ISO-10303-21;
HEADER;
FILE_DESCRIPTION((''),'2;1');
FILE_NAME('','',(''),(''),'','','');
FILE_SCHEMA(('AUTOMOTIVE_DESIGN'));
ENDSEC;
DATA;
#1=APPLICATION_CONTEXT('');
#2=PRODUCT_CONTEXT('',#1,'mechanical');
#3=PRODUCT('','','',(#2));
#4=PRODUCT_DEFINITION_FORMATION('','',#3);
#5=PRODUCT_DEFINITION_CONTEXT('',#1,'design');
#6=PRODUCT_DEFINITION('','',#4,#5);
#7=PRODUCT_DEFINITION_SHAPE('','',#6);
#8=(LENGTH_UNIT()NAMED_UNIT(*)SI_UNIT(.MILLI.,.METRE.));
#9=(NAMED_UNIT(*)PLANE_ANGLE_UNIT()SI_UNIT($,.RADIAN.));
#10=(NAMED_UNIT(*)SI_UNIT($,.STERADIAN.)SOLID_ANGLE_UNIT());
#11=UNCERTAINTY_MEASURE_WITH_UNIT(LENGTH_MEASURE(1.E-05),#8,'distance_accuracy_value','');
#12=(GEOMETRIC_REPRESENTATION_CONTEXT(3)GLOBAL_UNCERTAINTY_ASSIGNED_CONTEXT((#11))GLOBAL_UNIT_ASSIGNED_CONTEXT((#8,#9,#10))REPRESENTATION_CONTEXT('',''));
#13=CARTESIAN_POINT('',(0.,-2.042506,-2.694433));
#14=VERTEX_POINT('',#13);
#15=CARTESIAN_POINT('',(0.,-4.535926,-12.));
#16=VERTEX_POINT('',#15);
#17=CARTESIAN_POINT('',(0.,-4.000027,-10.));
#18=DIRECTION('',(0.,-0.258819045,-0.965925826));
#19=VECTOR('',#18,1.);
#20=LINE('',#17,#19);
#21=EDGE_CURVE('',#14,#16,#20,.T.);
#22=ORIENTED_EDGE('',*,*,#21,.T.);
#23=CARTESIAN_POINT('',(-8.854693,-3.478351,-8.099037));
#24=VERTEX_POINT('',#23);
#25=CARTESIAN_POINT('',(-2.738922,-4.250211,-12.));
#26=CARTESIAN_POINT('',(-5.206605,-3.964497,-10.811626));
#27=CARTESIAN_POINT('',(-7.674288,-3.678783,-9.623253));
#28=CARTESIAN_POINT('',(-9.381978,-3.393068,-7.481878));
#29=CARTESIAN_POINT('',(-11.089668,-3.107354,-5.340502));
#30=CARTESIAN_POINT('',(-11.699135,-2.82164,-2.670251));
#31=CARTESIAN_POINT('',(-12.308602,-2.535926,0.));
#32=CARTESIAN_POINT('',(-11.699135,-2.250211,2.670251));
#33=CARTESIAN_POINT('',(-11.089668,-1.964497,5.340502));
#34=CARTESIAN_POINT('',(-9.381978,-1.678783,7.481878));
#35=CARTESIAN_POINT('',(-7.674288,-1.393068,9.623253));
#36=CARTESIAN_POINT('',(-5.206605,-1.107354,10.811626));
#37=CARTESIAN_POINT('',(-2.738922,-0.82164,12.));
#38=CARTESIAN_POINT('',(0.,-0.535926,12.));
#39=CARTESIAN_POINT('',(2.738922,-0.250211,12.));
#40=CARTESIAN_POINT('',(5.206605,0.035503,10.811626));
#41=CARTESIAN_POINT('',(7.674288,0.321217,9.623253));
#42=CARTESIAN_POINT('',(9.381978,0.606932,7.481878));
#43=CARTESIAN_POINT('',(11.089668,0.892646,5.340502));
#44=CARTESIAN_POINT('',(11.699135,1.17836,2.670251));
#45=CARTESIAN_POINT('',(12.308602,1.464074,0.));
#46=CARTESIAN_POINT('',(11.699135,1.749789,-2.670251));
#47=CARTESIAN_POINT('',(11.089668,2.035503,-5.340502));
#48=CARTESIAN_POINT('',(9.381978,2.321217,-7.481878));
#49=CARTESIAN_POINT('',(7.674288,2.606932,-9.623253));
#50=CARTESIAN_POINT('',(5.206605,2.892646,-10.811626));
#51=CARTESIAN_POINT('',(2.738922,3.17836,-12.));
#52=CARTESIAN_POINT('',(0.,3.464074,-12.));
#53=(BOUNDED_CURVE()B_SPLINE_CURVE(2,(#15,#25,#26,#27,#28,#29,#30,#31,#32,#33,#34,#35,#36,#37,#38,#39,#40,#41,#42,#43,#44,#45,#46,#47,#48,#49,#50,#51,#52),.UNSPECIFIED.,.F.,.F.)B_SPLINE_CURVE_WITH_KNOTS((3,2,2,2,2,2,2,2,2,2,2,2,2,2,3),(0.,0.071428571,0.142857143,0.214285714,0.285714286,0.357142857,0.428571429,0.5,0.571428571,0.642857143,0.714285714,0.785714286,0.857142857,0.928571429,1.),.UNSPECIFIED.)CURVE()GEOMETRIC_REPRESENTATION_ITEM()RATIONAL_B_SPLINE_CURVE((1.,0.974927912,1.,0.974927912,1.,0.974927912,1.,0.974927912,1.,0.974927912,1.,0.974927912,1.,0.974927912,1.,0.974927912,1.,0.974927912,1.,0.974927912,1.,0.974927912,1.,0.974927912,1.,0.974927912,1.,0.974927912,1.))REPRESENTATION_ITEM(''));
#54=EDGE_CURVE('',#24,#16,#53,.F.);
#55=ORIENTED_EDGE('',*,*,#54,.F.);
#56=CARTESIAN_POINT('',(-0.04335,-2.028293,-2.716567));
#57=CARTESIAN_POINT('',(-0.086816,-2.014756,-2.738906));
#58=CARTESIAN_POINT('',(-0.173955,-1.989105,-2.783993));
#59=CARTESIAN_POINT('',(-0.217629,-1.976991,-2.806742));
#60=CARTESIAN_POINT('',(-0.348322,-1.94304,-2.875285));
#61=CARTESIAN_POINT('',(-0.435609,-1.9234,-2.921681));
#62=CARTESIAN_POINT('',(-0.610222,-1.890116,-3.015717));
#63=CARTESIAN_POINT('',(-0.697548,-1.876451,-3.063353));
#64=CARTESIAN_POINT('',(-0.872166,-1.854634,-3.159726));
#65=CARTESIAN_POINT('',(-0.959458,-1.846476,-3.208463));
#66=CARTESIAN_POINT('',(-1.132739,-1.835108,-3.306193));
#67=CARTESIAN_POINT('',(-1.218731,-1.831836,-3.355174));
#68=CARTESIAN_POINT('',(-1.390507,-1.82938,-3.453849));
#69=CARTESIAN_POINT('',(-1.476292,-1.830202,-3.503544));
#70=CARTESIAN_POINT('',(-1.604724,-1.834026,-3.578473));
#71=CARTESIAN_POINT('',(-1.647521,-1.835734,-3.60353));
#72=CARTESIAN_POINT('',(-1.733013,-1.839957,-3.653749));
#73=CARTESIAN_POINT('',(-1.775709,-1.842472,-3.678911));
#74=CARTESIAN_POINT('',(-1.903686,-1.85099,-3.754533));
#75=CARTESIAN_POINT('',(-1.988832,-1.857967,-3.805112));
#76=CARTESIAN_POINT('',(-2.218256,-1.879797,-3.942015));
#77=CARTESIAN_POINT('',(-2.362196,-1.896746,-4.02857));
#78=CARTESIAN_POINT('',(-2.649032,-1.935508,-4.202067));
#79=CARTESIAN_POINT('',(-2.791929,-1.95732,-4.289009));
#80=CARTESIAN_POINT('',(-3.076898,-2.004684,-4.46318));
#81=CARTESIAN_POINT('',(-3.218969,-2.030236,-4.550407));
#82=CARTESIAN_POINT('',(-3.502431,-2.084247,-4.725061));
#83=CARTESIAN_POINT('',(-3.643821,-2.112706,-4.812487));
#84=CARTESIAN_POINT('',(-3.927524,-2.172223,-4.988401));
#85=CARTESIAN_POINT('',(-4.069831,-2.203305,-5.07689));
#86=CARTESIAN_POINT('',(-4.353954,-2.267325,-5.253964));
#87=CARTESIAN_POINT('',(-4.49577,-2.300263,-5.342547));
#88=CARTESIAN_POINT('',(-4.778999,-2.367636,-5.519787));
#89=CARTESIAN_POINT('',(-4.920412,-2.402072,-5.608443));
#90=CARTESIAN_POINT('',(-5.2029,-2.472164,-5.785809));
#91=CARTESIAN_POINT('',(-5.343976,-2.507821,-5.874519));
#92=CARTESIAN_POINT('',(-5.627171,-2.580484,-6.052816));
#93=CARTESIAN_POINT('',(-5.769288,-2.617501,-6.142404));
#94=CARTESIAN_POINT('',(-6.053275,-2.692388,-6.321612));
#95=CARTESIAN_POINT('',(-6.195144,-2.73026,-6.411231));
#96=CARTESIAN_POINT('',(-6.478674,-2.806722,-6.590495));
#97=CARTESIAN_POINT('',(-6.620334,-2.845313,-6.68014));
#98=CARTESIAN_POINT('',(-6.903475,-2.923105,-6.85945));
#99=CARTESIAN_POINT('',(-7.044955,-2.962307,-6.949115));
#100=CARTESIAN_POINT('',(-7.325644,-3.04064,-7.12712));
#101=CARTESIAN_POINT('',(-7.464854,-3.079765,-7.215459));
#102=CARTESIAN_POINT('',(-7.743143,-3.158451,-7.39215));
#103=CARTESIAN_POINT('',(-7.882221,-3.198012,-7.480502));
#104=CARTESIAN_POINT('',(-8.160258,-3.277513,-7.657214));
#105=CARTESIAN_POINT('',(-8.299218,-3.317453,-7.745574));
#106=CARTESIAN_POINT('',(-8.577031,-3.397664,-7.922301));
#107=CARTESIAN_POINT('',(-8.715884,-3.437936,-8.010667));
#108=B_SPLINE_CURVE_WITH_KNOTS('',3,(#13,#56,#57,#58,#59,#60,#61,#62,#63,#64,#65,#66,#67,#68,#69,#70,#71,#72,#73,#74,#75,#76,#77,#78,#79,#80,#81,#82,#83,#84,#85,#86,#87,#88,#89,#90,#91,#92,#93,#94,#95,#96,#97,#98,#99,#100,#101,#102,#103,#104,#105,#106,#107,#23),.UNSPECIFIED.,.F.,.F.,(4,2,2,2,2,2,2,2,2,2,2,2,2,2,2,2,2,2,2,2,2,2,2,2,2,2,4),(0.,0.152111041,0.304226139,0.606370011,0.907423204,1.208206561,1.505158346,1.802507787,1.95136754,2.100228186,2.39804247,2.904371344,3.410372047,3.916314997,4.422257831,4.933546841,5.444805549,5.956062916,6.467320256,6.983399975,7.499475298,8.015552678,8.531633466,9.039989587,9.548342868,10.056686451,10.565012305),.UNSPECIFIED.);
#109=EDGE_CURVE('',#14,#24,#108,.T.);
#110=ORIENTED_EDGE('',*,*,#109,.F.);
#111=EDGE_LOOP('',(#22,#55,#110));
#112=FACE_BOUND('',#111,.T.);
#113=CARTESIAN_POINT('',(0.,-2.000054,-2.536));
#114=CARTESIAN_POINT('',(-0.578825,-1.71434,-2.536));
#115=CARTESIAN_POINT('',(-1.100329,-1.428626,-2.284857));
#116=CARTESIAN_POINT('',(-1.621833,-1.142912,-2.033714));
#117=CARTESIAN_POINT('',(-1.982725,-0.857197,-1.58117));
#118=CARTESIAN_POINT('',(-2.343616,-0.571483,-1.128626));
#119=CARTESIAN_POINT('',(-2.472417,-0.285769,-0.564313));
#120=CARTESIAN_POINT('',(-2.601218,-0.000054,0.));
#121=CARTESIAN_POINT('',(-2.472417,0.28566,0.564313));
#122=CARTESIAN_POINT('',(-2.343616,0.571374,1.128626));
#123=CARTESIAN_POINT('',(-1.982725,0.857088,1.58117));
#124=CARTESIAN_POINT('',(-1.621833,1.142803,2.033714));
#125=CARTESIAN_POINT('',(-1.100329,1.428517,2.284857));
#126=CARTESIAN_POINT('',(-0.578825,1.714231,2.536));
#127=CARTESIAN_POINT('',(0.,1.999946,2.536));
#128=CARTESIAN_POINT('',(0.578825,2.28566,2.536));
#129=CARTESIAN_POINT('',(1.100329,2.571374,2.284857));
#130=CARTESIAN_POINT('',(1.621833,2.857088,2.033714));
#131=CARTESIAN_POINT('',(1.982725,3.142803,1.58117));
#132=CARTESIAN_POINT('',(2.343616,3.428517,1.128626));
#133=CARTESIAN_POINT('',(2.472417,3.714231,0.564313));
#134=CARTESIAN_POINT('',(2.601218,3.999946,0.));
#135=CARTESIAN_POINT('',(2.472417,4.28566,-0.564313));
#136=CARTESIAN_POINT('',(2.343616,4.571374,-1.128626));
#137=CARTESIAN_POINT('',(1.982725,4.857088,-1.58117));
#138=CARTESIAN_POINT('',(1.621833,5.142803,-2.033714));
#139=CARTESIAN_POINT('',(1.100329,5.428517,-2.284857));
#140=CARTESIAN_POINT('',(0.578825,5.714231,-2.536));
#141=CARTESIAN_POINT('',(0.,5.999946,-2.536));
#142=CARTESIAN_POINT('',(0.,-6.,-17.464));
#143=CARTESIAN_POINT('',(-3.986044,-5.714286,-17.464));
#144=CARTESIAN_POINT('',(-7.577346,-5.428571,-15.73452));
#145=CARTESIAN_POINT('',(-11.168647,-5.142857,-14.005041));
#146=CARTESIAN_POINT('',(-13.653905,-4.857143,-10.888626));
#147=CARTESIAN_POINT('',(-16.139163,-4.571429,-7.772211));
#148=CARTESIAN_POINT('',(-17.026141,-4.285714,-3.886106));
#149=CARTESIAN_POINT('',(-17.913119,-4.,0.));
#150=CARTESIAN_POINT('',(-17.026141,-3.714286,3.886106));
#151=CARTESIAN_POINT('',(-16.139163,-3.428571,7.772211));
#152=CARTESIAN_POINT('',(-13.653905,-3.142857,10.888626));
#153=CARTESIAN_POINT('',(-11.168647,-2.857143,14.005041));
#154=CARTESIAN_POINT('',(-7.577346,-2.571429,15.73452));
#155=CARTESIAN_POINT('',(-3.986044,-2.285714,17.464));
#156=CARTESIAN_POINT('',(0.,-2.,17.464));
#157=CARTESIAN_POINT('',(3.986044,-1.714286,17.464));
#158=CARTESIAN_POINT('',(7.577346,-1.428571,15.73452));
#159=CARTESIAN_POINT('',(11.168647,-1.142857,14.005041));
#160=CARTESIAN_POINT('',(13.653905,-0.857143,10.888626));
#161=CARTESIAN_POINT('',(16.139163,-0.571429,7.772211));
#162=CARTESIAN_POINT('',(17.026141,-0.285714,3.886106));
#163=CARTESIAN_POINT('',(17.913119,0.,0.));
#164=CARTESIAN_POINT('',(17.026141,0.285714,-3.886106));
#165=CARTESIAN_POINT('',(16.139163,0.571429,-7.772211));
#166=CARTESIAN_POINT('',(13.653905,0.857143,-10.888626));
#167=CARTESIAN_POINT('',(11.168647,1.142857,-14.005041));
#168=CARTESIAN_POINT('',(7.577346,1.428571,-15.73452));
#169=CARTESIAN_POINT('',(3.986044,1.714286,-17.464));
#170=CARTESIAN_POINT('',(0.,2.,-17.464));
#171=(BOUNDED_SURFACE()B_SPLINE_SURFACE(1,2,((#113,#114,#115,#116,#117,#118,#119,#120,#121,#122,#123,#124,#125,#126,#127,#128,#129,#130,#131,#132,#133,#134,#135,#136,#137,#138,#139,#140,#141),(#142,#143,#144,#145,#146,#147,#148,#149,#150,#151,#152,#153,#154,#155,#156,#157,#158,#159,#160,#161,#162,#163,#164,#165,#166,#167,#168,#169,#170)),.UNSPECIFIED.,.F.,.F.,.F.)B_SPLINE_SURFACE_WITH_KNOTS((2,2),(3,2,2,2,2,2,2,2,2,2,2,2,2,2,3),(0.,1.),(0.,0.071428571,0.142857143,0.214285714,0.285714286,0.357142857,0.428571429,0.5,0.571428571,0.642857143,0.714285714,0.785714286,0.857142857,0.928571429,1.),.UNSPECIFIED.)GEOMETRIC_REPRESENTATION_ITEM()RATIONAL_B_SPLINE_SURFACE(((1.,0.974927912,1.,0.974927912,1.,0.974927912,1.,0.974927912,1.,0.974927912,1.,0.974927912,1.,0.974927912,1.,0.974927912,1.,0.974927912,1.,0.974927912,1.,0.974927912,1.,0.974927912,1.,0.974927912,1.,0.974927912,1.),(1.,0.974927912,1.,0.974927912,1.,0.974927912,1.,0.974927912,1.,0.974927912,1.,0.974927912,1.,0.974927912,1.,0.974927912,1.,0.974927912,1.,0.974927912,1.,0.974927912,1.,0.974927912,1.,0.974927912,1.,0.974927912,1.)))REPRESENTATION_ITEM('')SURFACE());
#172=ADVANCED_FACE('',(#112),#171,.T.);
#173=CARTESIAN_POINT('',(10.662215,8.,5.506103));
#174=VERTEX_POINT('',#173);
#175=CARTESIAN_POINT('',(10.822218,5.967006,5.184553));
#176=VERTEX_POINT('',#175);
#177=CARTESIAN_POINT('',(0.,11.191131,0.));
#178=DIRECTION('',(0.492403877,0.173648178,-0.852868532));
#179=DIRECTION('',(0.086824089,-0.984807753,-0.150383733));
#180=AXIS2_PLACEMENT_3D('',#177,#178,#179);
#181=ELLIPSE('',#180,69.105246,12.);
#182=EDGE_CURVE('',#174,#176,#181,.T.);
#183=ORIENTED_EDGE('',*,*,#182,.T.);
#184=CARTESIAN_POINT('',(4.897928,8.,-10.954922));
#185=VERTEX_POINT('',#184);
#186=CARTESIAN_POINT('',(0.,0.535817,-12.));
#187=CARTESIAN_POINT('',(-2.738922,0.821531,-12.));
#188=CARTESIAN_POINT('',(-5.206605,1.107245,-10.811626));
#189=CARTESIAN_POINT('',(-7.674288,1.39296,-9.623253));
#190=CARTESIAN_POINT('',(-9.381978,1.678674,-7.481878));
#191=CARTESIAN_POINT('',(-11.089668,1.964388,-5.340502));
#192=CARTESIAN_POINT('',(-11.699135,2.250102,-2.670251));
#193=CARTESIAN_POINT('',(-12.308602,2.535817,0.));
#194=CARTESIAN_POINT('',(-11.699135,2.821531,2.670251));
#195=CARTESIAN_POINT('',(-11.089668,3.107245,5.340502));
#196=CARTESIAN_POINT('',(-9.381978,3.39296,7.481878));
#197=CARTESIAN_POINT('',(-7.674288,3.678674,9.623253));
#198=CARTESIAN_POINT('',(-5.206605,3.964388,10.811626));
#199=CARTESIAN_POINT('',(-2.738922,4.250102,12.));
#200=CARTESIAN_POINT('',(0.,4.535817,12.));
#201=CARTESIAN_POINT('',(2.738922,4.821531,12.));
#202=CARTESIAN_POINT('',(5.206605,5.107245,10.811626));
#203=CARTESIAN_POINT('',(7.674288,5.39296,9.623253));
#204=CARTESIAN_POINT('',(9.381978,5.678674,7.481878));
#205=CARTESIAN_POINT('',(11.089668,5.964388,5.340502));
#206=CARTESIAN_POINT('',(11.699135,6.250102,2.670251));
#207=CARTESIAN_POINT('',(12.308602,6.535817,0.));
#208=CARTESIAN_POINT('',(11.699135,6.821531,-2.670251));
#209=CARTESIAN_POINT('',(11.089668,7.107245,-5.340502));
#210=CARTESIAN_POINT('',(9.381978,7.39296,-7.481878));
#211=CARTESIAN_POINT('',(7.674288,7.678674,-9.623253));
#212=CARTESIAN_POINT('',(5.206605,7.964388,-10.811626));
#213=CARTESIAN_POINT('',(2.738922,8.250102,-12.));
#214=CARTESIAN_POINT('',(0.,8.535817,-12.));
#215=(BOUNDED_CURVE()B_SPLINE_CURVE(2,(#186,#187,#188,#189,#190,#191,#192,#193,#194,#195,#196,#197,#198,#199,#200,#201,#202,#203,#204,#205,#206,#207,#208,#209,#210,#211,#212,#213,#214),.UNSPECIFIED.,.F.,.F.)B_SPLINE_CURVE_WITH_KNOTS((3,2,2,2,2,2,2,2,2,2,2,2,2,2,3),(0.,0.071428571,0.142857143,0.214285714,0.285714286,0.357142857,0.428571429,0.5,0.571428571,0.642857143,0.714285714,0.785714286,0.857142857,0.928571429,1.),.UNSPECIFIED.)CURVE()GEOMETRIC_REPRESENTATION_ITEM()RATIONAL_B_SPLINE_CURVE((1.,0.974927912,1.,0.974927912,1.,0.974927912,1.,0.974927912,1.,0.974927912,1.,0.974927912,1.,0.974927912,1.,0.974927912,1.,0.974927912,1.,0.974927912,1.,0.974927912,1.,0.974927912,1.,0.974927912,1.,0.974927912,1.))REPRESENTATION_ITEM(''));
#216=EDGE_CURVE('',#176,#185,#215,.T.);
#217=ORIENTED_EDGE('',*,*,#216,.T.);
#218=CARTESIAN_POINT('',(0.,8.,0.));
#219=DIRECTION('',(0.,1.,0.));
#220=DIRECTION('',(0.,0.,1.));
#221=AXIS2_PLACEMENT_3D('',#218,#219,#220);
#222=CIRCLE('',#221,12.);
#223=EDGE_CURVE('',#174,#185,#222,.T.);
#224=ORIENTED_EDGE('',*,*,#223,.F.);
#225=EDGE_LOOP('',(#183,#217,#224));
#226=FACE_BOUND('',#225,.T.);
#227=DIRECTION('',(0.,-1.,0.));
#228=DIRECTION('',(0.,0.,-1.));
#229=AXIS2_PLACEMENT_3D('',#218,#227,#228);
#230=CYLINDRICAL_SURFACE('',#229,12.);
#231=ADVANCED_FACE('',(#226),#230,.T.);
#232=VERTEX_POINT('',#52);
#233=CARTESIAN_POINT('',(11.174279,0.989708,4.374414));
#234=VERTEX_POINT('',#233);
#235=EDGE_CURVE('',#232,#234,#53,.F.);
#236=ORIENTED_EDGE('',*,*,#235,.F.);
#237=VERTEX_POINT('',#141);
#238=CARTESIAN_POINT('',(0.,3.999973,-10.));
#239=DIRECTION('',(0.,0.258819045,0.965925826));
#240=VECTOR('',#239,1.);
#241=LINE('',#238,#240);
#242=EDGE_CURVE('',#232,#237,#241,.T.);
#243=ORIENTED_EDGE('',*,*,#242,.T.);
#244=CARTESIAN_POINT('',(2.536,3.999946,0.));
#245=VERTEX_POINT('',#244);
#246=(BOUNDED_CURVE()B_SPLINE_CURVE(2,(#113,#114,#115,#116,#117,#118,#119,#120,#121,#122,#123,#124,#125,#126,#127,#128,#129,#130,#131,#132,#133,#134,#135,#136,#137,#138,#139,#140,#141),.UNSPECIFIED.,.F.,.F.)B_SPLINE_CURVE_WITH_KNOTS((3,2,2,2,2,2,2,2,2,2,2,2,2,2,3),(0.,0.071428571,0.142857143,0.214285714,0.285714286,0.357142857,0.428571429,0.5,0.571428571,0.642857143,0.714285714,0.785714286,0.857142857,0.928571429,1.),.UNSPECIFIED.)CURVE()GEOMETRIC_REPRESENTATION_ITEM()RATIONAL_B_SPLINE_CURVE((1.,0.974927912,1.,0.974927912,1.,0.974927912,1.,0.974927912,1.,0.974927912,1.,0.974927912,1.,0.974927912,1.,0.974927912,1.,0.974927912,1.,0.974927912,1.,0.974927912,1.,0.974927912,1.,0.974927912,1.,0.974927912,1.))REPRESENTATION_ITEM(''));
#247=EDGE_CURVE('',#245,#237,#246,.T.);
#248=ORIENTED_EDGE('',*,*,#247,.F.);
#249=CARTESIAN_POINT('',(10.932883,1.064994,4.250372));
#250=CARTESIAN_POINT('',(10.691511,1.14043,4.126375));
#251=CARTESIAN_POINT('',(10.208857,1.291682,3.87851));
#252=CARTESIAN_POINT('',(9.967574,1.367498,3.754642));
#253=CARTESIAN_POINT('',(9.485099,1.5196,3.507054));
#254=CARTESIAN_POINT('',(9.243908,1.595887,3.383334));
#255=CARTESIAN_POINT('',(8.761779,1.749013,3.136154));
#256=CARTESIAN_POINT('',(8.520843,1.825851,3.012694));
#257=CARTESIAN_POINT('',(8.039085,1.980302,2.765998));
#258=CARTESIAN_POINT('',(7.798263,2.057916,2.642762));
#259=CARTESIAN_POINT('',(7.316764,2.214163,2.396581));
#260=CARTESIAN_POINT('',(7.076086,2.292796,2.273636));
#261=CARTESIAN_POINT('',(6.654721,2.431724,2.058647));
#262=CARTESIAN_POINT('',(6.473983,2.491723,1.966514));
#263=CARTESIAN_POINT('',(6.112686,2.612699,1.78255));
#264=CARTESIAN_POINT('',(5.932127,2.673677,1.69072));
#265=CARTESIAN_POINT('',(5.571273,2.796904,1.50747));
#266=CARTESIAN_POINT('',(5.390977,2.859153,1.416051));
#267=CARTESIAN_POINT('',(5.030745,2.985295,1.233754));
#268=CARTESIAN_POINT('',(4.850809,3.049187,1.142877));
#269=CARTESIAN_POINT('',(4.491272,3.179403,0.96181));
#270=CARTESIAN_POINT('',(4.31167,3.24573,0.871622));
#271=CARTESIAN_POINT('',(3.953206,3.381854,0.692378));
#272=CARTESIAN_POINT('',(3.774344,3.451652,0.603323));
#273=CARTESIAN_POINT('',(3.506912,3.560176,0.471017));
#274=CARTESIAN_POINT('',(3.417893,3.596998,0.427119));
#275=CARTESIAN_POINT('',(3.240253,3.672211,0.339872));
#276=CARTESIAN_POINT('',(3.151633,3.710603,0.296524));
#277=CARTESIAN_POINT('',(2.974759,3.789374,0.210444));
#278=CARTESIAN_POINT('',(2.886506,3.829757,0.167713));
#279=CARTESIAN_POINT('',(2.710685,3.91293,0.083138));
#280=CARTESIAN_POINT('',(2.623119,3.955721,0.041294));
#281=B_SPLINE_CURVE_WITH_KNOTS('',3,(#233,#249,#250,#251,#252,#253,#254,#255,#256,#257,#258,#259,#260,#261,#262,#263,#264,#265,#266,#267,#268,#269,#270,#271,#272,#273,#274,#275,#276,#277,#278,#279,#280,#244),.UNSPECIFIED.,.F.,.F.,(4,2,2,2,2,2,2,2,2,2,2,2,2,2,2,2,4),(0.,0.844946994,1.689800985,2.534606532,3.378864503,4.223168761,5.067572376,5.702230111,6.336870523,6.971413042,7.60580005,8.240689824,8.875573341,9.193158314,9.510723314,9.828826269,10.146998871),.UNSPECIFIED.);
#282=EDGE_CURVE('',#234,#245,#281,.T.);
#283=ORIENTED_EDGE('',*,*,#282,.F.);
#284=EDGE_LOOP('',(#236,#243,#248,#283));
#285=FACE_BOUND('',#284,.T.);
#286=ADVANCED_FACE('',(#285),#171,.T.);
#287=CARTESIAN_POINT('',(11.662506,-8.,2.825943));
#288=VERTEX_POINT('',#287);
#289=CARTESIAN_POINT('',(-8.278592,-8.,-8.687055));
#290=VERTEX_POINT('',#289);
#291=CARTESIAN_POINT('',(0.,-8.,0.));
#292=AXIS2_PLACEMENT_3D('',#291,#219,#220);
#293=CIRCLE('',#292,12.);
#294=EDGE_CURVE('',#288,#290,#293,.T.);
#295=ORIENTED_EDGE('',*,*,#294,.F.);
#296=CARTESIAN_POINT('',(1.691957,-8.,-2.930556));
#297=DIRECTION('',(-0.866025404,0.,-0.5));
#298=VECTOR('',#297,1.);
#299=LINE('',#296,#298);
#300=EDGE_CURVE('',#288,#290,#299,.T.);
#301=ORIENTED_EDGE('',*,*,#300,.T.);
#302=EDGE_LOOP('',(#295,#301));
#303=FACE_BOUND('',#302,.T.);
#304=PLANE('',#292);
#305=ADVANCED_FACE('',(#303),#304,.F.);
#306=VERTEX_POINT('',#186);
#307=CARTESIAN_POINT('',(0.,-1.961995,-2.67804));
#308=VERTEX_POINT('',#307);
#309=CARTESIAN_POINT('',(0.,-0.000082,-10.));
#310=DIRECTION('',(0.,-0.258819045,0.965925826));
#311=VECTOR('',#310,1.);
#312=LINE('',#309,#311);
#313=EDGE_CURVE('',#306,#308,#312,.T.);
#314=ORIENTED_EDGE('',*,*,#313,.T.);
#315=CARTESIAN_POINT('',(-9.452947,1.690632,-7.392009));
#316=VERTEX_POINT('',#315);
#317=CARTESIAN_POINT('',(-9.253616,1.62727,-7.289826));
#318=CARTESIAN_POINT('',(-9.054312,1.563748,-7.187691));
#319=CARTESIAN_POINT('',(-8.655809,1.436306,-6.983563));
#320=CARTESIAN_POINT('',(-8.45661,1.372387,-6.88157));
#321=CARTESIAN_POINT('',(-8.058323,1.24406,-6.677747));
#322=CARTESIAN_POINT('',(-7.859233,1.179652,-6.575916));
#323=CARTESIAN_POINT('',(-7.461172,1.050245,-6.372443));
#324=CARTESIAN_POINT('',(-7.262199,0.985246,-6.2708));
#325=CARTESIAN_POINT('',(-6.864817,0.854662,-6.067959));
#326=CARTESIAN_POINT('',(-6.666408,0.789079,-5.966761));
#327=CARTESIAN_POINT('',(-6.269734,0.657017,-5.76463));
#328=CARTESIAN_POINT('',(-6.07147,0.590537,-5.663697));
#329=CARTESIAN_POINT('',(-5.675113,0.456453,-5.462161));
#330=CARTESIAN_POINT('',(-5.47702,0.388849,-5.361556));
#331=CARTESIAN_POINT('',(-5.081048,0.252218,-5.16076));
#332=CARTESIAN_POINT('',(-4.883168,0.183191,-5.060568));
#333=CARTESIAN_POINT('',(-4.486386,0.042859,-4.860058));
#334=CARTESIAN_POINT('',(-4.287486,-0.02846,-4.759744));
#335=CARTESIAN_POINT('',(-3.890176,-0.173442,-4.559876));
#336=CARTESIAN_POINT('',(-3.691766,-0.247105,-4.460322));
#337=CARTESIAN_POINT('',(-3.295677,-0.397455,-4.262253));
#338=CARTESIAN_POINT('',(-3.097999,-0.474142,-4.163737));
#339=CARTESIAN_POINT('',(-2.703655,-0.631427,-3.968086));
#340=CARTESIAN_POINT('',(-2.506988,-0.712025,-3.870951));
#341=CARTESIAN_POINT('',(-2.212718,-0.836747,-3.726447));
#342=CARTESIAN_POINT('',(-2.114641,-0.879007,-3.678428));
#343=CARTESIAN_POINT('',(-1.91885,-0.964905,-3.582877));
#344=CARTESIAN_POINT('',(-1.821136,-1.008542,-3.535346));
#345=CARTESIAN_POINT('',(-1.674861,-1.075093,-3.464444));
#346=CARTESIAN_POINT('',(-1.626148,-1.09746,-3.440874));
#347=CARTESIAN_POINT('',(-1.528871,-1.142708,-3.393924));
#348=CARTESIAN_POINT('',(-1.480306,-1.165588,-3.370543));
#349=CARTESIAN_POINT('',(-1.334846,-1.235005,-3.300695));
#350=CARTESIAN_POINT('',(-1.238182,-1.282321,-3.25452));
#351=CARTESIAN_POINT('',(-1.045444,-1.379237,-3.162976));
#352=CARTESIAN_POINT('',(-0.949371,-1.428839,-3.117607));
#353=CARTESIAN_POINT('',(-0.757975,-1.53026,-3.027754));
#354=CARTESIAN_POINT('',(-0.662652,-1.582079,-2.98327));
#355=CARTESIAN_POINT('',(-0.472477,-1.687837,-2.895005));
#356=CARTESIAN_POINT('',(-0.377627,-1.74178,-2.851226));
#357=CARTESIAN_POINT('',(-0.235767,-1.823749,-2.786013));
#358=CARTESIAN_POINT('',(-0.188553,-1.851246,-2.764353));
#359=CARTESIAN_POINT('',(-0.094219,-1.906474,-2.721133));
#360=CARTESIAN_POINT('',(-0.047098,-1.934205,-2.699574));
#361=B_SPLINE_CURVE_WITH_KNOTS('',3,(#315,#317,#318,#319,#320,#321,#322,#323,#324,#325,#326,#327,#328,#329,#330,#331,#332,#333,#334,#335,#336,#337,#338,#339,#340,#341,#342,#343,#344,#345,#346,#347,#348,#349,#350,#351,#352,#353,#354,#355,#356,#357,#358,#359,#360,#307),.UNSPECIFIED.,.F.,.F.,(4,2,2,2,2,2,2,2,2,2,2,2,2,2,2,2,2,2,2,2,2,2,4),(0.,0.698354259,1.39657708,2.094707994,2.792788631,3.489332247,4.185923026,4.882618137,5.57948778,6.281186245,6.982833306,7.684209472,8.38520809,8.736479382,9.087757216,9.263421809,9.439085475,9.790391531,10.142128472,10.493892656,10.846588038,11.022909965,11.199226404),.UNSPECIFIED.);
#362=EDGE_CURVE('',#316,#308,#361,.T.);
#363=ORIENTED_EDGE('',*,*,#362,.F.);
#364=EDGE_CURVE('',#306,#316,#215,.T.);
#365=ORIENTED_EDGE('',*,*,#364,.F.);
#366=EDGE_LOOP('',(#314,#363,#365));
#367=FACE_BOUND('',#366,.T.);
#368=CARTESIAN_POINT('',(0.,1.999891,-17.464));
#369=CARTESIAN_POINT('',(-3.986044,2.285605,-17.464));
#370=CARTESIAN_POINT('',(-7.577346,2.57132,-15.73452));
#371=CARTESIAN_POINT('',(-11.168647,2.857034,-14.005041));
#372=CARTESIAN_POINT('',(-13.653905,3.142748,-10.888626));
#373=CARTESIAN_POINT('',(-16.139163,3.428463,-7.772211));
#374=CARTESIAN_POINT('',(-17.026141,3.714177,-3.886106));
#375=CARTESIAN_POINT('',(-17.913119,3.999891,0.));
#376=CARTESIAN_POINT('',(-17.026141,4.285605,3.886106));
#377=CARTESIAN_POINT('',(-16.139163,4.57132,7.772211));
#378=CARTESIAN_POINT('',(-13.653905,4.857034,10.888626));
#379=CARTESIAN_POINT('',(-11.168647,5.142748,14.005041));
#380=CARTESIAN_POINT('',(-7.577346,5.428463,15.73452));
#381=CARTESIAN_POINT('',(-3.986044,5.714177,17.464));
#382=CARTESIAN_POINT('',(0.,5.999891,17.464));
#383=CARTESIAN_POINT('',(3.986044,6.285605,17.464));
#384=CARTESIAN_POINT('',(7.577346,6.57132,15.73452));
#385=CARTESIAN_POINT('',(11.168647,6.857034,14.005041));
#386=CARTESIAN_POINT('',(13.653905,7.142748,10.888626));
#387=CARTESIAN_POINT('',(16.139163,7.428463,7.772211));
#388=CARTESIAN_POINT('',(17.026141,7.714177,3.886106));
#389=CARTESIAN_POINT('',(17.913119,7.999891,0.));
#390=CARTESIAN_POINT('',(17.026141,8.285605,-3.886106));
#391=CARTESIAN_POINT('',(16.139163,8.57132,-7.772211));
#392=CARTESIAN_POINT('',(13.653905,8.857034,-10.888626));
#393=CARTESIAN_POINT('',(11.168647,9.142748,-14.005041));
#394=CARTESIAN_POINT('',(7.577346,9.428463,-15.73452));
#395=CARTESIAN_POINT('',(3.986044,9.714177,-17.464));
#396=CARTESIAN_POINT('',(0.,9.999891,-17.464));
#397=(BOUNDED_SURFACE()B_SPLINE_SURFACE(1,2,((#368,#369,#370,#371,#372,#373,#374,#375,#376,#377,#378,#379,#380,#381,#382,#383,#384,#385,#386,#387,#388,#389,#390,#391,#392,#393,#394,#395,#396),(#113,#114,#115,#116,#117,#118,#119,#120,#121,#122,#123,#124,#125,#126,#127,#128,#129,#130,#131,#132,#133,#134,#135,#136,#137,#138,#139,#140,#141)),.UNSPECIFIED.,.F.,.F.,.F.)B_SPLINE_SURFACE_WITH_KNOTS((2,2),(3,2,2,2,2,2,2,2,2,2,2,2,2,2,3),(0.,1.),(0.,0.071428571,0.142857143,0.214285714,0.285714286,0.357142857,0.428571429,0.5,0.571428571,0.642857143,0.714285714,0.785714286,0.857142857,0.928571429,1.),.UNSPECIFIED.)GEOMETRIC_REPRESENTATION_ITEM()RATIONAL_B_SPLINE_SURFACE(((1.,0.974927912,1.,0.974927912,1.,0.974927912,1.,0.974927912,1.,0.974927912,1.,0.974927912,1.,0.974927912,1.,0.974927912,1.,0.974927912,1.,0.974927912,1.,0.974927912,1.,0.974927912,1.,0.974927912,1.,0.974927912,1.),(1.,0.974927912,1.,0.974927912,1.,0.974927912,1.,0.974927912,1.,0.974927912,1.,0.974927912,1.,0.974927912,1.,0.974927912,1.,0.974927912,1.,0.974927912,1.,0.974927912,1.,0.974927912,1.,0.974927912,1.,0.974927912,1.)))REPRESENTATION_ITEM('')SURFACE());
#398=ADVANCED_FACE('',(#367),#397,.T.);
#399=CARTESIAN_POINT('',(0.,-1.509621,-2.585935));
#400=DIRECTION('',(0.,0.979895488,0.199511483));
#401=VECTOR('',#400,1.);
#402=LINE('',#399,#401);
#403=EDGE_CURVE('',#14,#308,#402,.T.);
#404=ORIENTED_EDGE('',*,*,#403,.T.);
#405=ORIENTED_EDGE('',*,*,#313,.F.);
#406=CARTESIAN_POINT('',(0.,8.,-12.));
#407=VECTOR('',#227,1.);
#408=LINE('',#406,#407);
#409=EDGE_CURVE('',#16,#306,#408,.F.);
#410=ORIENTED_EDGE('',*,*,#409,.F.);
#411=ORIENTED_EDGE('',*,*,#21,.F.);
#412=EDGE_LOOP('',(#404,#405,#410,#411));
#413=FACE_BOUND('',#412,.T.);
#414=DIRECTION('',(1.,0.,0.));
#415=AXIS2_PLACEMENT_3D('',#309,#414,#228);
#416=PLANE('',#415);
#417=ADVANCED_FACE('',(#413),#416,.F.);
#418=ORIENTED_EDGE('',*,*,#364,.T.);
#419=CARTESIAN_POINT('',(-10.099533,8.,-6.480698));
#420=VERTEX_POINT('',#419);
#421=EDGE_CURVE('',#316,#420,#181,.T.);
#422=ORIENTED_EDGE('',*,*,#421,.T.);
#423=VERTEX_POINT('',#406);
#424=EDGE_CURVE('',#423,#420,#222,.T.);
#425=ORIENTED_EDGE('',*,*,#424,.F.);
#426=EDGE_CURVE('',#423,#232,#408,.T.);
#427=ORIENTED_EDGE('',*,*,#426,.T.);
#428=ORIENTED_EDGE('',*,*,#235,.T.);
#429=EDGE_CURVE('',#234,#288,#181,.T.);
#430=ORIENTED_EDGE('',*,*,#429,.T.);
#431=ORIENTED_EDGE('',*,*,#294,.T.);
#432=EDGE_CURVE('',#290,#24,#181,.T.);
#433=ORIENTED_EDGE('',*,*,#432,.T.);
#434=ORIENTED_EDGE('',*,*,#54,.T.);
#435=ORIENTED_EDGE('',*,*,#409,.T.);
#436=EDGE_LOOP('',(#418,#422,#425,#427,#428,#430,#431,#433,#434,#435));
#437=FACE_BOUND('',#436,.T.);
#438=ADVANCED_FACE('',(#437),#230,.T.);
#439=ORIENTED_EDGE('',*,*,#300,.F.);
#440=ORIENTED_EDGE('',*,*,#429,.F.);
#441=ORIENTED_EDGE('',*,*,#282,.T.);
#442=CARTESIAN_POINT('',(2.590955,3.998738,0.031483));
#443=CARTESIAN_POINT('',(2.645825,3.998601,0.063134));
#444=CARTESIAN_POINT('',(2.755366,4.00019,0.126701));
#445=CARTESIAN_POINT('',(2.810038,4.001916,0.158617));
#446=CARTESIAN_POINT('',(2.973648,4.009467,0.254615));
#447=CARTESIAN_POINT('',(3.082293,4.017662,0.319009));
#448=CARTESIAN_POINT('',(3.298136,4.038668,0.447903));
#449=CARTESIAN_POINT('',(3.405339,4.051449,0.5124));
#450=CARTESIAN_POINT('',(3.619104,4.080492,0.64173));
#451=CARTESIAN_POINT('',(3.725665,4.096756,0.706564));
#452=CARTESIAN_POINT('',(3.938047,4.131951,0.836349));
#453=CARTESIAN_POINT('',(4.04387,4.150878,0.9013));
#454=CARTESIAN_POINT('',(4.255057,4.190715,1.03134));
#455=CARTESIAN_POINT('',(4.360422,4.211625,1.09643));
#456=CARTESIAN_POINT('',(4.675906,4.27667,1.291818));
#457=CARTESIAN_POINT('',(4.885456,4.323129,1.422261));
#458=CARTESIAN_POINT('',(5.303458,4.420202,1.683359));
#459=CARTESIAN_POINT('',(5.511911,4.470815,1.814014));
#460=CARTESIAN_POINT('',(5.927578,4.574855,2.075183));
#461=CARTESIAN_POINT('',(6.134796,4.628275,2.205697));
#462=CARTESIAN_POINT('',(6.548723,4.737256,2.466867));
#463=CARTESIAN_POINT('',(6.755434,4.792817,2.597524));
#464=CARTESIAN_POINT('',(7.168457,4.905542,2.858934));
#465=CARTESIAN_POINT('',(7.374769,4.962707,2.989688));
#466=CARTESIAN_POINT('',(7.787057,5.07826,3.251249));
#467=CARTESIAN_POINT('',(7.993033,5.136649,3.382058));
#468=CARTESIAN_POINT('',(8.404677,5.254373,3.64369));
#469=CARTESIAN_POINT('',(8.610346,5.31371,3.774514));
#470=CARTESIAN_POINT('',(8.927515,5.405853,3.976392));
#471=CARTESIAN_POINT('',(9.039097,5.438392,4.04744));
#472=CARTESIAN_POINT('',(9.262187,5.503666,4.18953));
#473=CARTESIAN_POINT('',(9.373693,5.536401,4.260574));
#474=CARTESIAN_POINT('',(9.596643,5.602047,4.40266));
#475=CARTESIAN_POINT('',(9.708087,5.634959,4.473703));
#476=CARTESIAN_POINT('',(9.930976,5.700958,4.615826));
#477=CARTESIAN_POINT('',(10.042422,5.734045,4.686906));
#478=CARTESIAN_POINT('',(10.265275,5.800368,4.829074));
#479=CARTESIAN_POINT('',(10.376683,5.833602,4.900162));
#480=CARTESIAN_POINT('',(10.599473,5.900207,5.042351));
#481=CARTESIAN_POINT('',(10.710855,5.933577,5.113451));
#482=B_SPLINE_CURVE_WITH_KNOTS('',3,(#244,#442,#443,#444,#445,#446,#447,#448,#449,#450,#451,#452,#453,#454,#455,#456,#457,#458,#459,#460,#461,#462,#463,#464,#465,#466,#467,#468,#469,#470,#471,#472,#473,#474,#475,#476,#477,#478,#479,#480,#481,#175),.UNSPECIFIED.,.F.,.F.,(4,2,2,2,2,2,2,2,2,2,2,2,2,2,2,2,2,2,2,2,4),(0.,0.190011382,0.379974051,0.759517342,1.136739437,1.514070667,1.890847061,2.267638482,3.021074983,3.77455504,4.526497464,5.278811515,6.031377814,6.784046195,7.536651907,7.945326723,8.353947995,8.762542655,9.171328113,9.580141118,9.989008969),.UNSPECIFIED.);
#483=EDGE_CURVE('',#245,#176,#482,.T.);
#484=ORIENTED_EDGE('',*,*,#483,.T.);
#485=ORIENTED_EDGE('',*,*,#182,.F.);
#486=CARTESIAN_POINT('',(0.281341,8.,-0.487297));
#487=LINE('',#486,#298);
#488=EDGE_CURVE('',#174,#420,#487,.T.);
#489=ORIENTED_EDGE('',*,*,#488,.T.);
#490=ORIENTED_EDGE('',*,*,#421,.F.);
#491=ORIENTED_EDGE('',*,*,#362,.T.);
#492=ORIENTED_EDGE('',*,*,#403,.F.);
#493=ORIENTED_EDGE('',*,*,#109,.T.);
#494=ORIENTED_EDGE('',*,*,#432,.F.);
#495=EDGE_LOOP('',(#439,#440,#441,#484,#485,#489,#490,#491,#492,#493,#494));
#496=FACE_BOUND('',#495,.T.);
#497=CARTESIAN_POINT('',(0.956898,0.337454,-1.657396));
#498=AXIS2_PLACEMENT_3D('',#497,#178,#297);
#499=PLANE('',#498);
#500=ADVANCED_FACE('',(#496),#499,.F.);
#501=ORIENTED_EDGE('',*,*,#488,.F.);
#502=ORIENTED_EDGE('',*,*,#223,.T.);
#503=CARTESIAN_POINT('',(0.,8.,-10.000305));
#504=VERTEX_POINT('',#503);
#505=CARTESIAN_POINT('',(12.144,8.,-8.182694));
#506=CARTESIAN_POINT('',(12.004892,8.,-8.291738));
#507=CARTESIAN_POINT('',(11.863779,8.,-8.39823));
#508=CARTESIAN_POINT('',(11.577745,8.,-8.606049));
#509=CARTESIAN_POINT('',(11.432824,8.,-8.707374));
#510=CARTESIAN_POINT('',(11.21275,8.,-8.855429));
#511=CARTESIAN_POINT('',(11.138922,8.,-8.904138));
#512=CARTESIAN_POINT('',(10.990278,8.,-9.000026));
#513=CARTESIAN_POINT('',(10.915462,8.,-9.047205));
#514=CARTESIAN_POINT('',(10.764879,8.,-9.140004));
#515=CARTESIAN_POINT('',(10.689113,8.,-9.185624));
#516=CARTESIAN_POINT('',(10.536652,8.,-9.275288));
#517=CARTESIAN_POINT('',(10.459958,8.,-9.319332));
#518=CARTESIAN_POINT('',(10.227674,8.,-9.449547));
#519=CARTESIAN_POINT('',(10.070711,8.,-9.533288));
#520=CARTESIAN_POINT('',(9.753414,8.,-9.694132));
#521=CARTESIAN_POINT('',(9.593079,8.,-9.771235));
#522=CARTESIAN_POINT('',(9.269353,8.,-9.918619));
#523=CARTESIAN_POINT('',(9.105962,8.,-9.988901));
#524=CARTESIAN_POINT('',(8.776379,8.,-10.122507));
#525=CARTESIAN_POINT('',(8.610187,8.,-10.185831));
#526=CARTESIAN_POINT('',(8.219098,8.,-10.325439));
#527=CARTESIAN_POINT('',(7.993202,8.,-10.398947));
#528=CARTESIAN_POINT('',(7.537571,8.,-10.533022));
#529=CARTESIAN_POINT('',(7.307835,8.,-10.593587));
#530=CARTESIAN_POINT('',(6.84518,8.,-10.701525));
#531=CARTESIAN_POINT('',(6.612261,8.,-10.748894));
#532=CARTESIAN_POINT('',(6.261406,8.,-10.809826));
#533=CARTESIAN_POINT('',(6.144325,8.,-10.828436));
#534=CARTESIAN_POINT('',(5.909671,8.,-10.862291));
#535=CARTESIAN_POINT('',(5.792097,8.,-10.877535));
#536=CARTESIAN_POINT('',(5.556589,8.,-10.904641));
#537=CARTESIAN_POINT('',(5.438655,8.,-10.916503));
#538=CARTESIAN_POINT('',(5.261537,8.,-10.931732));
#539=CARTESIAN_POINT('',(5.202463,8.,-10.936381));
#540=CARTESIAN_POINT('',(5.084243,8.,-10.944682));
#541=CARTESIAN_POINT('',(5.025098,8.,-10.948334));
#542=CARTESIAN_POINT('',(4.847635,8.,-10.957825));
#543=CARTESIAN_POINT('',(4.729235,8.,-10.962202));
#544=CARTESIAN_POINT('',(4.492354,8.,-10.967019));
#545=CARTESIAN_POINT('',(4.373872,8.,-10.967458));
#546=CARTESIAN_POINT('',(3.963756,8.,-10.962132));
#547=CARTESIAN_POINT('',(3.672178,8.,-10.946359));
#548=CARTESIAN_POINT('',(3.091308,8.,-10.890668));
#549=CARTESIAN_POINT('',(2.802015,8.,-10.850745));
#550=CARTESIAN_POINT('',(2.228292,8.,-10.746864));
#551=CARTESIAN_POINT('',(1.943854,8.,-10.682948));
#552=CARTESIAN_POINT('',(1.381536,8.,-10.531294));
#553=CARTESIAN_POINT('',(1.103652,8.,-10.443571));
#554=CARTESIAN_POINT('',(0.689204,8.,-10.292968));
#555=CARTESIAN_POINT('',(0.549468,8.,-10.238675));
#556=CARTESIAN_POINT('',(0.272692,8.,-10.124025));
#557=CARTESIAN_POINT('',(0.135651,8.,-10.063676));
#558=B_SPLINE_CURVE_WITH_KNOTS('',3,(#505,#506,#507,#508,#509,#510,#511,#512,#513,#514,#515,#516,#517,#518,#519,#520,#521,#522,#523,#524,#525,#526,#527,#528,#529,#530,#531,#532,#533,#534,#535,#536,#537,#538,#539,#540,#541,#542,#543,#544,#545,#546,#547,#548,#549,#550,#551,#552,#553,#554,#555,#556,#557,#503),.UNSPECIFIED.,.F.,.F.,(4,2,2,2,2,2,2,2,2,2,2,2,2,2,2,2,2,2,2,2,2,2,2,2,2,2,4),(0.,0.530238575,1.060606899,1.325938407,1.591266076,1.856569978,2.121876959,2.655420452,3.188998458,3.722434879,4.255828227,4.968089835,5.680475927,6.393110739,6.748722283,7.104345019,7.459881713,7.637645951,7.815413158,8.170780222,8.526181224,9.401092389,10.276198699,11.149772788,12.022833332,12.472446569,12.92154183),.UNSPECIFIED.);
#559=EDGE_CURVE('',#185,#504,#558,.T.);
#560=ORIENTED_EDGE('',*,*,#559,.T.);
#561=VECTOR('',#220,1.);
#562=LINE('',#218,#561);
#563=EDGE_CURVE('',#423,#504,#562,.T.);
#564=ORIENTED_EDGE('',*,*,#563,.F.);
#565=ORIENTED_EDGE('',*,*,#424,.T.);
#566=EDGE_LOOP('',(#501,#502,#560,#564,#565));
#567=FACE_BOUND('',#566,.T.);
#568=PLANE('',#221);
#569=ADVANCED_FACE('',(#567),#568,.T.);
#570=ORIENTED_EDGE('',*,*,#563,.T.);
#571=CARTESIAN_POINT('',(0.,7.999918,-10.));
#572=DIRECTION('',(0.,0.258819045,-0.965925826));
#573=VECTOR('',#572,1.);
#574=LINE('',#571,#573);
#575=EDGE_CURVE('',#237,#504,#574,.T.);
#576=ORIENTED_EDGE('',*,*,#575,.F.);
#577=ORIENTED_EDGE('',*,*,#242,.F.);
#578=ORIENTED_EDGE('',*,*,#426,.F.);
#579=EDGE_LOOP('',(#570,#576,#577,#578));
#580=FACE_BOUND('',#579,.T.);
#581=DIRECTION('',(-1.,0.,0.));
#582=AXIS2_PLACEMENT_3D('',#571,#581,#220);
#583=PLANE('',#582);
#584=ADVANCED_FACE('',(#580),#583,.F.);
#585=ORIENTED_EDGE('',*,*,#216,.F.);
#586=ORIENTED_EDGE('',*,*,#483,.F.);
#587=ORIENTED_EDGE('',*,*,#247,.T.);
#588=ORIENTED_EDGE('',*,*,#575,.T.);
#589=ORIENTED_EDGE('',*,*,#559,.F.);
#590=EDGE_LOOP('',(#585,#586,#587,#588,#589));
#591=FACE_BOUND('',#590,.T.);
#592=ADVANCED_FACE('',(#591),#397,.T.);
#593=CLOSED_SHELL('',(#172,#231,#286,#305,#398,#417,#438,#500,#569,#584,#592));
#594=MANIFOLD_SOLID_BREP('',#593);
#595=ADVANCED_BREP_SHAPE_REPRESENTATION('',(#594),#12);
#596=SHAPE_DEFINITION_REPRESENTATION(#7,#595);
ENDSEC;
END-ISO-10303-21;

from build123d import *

# Parameters (mm, degrees)
SKETCH_2_R              = 12
EXTRUDE_1_DEPTH         = 8
SWEEP_3_PITCH           = 8
SURFACE_START           = -14
SURFACE_CUT_2_OUTLINE_W = 28
SURFACE_CUT_2_OUTLINE_H = 22
SURFACE_CUT_2_DEPTH     = 15.943319485


with BuildPart() as part:
    # Эскиз2 → Бобышка-Вытянуть1 (new, symmetric)
    with BuildSketch(Plane(origin=(0, 0, 0), x_dir=(1, 0, 0), z_dir=(0, 1, 0))):
        with Locations(Location((0, 0, 0), (0, 0, 270))):
            Circle(SKETCH_2_R)
    extrude(amount=EXTRUDE_1_DEPTH, both=True)

    # Вырез-По траектории3: arcs per turn and ends read off the stored shape
    # Вырез-По траектории3: the profile of Эскиз5<2> screwed along a right-hand helix through 1 turns, 14 arcs to a turn; built about Z, then put on its axis
    sweep_3_z = Axis((0, 0, 0), (0, 0, 1))
    sweep_3_corners = [(17.464, 0, 2), (2.536, 0, 5.999945545), (17.464, 0, 9.999891089)]
    with BuildLine(mode=Mode.PRIVATE) as sweep_3_profile:
        Line(sweep_3_corners[0], sweep_3_corners[1])
        Line(sweep_3_corners[1], sweep_3_corners[2])
        Line(sweep_3_corners[2], sweep_3_corners[0])
    sweep_3_cap = Face(sweep_3_profile.wire())
    sweep_3_turn_angles = [0, 12.857142857, 25.714285714, 38.571428571, 51.428571429, 64.285714286, 77.142857143, 90, 102.857142857, 115.714285714, 128.571428571, 141.428571429, 154.285714286, 167.142857143, 180, 192.857142857, 205.714285714, 218.571428571, 231.428571429, 244.285714286, 257.142857143, 270, 282.857142857, 295.714285714, 308.571428571, 321.428571429, 334.285714286, 347.142857143, 360]
    sweep_3_turn_weights = [1, 0.9749279121818236, 1, 0.9749279121818236, 1, 0.9749279121818236, 1, 0.9749279121818236, 1, 0.9749279121818236, 1, 0.9749279121818236, 1, 0.9749279121818236, 1, 0.9749279121818236, 1, 0.9749279121818236, 1, 0.9749279121818236, 1, 0.9749279121818236, 1, 0.9749279121818237, 1, 0.9749279121818236, 1, 0.9749279121818236, 1]
    sweep_3_turn_rails = [Edge.make_bspline([Vector(p[0], p[1], 0).rotate(sweep_3_z, sweep_3_turn_angles[k]) / sweep_3_turn_weights[k] + Vector(0, 0, p[2] + SWEEP_3_PITCH * sweep_3_turn_angles[k] / 360) for k in range(29)], [0, 0, 0, 1, 1, 2, 2, 3, 3, 4, 4, 5, 5, 6, 6, 7, 7, 8, 8, 9, 9, 10, 10, 11, 11, 12, 12, 13, 13, 14, 14, 14], 2, sweep_3_turn_weights) for p in sweep_3_corners]
    sweep_3_turn_sides = [Face.make_surface_from_curves(sweep_3_turn_rails[p[0]], sweep_3_turn_rails[p[1]]) for p in [(0, 1), (1, 2), (2, 0)]]
    sweep_3 = Plane(origin=(0, -8, 0), x_dir=(0, 0, -1), z_dir=(0, 1, 0)) * Solid(Shell([*sweep_3_turn_sides, sweep_3_cap, sweep_3_cap.rotate(sweep_3_z, 360).moved(Location((0, 0, SWEEP_3_PITCH * 360 / 360)))]))
    add(sweep_3, mode=Mode.SUBTRACT)

    # Surface Cut 2: read off the stored shape, not the designer's step
    # Surface Cut 2 outline → Surface Cut 2 (cut)
    with BuildSketch(Plane(origin=(0, 0, 0), x_dir=(0.8703668320896428, -0.09824022777399519, 0.48250433702211726), z_dir=(0.4924038765061049, 0.17364817766692997, -0.8528685319524428)).offset(SURFACE_START)):
        Rectangle(SURFACE_CUT_2_OUTLINE_W, SURFACE_CUT_2_OUTLINE_H)
    extrude(amount=SURFACE_CUT_2_DEPTH, mode=Mode.SUBTRACT)


solid = part.part
